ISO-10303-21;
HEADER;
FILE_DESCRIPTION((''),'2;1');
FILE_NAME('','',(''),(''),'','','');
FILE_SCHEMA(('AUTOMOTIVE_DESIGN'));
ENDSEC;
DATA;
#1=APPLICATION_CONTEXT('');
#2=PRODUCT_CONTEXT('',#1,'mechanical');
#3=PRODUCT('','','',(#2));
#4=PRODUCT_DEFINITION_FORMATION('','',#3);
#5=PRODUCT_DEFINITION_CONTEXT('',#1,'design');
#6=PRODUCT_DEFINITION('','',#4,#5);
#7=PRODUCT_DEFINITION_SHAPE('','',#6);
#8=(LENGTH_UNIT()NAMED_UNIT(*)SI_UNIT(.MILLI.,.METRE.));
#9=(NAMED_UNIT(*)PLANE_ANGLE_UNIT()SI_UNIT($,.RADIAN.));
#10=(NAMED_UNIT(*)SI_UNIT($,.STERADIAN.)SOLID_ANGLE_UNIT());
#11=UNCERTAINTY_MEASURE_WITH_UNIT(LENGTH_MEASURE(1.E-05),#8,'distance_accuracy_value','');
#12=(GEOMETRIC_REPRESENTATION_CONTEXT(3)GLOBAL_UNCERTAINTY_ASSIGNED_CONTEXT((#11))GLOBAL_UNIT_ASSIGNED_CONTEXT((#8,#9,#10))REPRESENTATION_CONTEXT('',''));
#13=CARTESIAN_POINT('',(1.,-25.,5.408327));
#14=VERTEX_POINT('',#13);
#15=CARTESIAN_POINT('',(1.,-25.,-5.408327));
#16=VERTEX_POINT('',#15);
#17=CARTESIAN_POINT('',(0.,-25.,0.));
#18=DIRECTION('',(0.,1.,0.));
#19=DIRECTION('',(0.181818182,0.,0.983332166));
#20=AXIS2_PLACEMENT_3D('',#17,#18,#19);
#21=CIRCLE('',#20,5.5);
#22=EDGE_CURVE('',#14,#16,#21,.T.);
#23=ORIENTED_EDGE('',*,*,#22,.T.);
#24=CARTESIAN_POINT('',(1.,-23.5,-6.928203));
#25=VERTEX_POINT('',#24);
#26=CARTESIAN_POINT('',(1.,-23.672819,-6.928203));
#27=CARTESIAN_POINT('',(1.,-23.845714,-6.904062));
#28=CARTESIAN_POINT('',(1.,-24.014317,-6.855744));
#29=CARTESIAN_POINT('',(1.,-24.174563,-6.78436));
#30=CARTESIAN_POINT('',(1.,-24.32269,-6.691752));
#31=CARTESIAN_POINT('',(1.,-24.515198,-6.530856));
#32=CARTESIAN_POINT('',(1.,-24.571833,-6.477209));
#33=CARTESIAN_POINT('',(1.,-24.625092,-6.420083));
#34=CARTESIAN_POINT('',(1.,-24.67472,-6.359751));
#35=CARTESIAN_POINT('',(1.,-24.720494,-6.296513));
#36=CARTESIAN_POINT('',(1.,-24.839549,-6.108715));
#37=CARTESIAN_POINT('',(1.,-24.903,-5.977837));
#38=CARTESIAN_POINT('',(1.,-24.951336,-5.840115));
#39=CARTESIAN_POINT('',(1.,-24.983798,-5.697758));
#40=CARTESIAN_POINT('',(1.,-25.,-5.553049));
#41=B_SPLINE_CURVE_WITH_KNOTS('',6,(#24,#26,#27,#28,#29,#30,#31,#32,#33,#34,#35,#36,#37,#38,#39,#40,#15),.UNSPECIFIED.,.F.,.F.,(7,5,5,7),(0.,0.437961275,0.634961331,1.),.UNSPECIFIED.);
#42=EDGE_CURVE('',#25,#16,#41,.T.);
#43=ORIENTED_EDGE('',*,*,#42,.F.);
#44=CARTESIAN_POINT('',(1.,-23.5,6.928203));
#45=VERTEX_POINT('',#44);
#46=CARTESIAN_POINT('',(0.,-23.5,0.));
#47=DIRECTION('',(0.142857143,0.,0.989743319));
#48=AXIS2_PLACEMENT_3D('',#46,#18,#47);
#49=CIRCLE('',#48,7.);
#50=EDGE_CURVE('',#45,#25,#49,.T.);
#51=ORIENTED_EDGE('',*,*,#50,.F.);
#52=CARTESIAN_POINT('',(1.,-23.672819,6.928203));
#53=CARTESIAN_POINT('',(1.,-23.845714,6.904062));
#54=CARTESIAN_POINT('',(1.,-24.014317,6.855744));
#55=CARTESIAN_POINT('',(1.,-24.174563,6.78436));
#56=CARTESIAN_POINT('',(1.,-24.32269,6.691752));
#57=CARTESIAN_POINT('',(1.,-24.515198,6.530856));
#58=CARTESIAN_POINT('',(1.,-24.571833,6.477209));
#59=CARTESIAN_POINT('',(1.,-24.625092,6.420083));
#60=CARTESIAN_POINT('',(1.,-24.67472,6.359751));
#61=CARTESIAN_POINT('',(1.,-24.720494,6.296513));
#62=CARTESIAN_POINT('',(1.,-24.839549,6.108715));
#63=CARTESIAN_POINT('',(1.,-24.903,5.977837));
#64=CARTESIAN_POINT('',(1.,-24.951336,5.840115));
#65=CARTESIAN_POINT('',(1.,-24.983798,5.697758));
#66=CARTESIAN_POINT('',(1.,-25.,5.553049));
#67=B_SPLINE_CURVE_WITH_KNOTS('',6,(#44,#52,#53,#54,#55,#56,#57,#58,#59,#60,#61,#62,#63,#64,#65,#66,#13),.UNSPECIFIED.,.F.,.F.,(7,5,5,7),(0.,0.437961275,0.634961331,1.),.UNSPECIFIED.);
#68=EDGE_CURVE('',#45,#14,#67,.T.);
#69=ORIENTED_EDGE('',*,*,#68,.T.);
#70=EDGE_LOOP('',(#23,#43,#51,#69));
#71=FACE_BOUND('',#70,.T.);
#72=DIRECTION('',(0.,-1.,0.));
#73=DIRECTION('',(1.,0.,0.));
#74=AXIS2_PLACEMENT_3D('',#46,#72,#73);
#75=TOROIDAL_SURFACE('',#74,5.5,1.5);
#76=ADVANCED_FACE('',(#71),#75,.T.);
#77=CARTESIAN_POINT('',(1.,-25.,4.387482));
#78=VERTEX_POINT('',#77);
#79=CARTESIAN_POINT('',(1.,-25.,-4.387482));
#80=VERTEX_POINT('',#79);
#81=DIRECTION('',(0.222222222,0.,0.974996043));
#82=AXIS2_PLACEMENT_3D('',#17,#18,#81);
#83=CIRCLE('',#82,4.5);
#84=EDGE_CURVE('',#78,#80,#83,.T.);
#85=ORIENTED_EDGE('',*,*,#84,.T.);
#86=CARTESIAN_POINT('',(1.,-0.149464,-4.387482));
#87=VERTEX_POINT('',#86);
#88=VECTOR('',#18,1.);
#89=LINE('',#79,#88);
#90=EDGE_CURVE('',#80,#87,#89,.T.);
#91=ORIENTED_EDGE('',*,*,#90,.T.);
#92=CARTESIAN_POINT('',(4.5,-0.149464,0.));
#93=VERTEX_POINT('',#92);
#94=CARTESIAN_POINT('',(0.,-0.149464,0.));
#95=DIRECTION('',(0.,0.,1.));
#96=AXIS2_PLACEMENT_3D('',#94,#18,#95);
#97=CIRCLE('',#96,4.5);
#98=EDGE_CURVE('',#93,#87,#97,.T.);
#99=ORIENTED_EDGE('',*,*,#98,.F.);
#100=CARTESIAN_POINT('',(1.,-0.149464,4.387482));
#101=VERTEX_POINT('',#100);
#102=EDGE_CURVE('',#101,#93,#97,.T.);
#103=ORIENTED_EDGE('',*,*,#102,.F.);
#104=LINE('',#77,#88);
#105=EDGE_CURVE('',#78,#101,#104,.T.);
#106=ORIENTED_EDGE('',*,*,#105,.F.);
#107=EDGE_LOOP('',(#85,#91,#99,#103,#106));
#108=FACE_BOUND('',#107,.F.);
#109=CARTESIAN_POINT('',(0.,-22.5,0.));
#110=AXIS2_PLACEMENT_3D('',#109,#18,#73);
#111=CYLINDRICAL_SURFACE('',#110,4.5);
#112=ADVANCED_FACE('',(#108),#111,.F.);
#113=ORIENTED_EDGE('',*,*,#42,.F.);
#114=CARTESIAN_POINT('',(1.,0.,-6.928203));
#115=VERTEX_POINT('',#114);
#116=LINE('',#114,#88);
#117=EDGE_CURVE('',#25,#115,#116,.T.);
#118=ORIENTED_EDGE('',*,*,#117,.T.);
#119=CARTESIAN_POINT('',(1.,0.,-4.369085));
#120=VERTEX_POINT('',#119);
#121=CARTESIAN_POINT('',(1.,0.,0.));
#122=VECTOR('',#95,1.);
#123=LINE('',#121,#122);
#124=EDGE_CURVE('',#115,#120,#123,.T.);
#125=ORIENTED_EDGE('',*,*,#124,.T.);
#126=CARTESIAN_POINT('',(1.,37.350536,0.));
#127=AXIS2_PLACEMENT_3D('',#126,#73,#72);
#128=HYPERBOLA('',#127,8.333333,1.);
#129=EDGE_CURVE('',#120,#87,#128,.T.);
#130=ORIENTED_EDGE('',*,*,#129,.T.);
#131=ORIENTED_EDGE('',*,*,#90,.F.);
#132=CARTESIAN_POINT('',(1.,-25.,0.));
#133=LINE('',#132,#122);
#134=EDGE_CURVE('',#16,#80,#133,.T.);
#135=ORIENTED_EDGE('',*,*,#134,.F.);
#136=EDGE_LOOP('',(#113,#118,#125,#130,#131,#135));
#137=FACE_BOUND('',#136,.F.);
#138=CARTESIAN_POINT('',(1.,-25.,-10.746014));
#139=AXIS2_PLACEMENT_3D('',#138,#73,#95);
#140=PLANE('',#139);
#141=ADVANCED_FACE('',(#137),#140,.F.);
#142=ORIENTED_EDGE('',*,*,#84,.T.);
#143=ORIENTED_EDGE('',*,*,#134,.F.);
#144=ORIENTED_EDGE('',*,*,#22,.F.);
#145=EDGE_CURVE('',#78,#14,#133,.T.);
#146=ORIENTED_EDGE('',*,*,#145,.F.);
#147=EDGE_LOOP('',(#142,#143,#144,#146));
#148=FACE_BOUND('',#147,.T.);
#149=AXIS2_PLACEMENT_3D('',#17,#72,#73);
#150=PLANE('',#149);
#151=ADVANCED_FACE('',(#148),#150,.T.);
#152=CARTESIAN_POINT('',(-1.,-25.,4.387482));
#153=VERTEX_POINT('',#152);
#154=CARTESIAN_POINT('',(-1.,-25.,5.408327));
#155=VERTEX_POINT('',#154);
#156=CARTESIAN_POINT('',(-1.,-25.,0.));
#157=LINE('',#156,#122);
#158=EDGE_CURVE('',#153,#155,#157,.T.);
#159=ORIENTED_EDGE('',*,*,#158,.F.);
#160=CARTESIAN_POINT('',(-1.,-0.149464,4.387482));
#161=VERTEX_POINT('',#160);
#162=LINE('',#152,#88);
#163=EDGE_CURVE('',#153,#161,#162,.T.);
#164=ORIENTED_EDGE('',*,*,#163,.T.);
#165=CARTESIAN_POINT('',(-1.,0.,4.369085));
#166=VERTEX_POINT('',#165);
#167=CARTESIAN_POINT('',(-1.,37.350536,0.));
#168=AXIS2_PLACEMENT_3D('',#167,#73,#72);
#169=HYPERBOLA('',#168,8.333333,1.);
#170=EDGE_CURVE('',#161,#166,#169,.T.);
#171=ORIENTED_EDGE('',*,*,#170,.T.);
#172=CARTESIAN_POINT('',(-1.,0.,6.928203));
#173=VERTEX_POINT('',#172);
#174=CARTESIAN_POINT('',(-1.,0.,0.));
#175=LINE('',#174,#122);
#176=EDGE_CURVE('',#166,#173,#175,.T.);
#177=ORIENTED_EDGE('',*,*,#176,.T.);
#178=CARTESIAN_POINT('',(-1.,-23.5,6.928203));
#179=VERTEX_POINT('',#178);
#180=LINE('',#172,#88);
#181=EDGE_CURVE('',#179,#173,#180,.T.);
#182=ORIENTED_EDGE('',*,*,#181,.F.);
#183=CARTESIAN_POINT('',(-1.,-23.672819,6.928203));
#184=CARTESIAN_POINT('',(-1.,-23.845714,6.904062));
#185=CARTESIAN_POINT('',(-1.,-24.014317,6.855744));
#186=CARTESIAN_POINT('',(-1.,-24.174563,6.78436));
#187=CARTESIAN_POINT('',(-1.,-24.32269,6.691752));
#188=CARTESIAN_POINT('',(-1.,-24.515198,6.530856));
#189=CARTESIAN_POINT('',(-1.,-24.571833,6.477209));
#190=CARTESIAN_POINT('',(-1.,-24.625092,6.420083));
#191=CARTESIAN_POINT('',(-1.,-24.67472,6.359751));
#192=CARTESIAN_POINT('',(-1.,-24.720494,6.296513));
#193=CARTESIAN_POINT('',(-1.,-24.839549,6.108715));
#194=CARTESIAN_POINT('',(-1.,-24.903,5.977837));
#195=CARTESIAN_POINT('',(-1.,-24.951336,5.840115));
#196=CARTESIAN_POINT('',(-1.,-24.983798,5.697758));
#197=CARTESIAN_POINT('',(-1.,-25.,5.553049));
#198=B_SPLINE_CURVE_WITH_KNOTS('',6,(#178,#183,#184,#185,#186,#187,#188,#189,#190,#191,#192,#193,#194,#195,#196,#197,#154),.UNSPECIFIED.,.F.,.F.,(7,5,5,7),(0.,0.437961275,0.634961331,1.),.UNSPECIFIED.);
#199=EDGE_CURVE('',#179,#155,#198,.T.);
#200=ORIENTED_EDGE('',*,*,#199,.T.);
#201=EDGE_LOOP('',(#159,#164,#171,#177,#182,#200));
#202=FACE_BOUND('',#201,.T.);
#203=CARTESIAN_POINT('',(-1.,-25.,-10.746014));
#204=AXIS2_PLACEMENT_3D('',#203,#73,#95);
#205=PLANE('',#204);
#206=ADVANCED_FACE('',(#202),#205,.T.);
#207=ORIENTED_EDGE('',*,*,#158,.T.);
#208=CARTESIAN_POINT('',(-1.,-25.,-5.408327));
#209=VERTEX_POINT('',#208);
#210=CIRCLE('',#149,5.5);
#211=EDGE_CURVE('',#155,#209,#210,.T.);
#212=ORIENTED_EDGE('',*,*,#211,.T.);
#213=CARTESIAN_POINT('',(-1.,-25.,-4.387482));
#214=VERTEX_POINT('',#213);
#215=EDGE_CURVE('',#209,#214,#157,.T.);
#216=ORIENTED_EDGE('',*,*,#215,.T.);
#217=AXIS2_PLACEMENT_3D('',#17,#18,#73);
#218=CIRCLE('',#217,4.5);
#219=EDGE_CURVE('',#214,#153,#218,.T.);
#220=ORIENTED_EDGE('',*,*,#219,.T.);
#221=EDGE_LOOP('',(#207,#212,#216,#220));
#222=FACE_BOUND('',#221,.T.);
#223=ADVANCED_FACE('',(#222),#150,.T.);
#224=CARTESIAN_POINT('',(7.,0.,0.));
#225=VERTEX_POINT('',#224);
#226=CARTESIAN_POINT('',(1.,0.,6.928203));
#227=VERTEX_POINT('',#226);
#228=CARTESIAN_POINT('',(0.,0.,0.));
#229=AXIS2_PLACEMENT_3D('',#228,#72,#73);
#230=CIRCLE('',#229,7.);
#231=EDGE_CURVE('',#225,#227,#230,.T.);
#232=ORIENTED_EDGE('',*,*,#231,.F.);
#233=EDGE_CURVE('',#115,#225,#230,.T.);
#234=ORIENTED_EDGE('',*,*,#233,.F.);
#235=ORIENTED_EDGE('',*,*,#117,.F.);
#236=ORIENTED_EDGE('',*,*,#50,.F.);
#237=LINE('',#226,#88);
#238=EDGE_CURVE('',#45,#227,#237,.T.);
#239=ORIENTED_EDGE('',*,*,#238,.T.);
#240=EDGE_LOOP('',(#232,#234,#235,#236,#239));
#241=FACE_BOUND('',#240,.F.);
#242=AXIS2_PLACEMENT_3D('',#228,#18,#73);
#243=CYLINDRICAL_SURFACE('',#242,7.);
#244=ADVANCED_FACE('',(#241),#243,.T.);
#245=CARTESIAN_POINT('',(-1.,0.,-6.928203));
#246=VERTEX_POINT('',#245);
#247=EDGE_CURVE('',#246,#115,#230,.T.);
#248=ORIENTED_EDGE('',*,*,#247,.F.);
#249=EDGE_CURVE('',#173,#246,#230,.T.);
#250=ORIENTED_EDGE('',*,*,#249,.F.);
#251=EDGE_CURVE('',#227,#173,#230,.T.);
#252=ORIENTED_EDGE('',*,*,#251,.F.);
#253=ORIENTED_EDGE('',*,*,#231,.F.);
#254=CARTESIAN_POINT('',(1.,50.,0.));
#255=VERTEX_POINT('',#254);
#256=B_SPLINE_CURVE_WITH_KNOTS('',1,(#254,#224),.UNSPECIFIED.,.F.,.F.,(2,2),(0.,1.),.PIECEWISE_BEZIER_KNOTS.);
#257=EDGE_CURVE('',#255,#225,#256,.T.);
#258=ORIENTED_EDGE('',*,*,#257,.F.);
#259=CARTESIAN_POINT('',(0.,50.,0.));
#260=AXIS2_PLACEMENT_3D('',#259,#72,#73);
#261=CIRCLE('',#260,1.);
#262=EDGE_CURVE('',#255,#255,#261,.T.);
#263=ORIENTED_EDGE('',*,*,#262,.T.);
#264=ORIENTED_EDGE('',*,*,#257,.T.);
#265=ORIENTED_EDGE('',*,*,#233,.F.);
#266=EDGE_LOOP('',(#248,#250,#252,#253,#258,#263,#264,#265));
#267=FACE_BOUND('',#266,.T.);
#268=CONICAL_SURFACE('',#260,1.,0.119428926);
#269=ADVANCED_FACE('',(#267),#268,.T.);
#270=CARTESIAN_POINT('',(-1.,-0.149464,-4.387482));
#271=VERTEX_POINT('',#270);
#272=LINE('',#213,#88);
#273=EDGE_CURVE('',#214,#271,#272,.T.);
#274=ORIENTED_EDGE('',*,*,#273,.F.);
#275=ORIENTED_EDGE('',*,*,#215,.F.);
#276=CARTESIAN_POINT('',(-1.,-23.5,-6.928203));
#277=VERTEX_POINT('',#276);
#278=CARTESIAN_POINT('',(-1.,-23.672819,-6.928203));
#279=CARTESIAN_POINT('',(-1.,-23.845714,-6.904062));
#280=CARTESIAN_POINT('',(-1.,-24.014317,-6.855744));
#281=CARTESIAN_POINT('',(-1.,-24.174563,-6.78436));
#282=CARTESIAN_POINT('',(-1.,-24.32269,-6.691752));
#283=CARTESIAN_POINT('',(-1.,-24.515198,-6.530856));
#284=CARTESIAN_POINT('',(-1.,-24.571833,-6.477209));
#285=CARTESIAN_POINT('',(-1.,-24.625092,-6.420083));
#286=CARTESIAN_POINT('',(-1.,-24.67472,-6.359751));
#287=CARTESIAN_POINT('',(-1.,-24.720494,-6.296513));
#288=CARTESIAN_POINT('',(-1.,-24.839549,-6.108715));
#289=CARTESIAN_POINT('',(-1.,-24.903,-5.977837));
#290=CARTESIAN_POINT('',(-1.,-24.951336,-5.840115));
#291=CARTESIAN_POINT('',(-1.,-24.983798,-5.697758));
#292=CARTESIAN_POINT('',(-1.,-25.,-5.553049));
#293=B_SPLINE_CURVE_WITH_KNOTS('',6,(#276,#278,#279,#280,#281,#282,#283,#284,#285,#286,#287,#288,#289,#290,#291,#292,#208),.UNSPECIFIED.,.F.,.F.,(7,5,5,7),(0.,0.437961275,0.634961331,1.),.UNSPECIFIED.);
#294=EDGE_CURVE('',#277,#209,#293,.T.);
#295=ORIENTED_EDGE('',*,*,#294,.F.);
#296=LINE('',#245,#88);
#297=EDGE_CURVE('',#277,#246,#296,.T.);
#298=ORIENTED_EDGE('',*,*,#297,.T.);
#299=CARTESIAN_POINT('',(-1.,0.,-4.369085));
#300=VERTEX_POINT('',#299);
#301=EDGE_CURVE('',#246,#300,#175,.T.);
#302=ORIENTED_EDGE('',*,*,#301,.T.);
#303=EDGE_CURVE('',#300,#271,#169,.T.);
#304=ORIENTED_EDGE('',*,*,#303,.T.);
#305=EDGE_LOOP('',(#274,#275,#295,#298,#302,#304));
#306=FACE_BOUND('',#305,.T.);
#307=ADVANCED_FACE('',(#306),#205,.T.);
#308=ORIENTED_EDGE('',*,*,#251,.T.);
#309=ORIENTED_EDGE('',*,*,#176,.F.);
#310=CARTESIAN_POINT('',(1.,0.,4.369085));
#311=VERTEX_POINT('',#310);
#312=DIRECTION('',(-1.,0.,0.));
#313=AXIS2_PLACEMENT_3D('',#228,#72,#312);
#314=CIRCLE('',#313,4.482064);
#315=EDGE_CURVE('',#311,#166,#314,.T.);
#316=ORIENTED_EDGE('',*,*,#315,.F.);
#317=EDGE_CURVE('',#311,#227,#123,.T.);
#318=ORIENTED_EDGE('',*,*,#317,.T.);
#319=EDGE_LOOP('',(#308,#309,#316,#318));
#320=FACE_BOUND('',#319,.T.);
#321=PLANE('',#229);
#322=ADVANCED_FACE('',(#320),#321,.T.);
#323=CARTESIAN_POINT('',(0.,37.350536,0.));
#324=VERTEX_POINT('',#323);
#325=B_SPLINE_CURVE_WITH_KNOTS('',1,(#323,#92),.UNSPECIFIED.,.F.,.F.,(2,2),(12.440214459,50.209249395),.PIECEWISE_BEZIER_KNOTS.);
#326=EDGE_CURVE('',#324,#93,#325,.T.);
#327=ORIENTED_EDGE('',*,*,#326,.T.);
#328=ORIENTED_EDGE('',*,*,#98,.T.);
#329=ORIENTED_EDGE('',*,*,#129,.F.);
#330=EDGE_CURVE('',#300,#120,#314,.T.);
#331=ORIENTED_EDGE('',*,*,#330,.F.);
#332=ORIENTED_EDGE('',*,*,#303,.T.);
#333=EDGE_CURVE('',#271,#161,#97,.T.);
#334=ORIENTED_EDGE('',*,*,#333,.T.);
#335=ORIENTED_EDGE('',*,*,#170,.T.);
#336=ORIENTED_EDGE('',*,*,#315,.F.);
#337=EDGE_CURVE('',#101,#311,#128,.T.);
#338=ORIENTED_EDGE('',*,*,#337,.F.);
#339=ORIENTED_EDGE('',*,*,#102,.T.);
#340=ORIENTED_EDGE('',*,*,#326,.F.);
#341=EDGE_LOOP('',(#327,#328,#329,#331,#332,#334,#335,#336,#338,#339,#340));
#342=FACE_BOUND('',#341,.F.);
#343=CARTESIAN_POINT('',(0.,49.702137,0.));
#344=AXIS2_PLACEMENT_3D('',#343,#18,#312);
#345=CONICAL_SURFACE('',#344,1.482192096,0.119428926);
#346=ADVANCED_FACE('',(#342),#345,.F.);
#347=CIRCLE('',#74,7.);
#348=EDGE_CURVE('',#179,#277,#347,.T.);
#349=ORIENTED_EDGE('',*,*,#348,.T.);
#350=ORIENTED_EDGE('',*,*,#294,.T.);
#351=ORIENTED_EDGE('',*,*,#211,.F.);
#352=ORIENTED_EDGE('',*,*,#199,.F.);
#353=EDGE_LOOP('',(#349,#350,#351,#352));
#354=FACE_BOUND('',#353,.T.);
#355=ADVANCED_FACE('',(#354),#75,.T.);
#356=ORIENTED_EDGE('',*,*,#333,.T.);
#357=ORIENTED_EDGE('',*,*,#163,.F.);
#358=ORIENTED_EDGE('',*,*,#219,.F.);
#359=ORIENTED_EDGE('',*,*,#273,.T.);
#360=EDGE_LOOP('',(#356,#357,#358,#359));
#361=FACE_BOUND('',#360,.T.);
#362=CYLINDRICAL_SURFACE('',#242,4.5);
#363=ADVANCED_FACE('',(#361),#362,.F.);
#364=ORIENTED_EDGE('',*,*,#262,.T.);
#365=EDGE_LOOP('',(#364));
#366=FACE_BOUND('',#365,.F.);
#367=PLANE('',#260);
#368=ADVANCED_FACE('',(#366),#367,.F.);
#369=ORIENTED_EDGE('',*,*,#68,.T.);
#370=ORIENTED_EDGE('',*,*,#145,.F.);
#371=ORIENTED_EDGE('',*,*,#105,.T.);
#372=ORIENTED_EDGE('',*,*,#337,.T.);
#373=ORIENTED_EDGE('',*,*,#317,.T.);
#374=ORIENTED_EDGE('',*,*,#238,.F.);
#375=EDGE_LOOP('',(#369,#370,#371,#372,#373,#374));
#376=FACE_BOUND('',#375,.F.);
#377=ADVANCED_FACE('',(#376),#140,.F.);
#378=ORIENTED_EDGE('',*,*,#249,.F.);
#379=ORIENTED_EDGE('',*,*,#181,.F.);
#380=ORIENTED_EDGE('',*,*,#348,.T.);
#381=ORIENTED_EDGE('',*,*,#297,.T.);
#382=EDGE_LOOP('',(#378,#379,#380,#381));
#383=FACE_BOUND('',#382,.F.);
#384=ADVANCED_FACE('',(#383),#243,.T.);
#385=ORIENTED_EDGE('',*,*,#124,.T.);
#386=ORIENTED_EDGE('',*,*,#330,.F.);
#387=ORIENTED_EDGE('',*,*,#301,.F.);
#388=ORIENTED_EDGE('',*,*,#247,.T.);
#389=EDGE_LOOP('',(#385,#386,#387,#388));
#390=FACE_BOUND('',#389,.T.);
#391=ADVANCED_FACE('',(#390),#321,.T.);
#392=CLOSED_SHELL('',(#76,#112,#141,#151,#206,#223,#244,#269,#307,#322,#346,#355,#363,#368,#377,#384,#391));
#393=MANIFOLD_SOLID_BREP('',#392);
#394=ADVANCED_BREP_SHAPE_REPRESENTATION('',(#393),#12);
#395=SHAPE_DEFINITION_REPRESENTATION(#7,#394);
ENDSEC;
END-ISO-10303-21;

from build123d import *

# Parameters (mm, degrees)
F0_R      = 7
F1_DEPTH  = 25
F3_R      = 1
F1_FACE_R = 7
F5_T      = -2.5
F6_R      = 1.5
F8_W      = 2
F8_H      = 21.4920276658
F9_DEPTH  = 25


# Not quite as in the source:
# - a shell that OpenCascade refuses in one call is made with other operations: the cavity is built on its own and cut out
# - a feature names something its author has since deleted; it is built from what else it names


with BuildPart() as f1:
    # F0 (on Front) → F1 (new body)
    with BuildSketch(Plane.XZ):
        Circle(F0_R)
    extrude(amount=F1_DEPTH)

    # F3 (on offset) → F4 section 0
    with BuildSketch(Plane.XZ.offset(-50)):
        Circle(F3_R)
    # F1_face (on face) → F4 section 1
    with BuildSketch(Plane(origin=(0, 0, 0), x_dir=(1, 0, 0), z_dir=(0, 1, 0))):
        Circle(F1_FACE_R)
    loft()

    # F5: a shell. OpenCascade refuses it in one call, so the cavity is built on its own and cut out:
    # the body offset inwards by the wall thickness, plus a prism from it out through each open face.
    f5_core = offset(f1.part, amount=F5_T, mode=Mode.PRIVATE)
    f5_exits = [f5_core.faces().sort_by_distance(p)[0] for p in [
        (0, -22.5, 0),
    ]]
    add(f5_core, mode=Mode.SUBTRACT)
    extrude(f5_exits, amount=-F5_T, mode=Mode.SUBTRACT)

    # F6
    f6_edges = [f1.edges().sort_by_distance(p)[0] for p in [
        (-7, -25, 0),
    ]]
    fillet(f6_edges, radius=F6_R)

    # F8 (on offset) → F9 (cut)
    with BuildSketch(Plane.XZ.offset(25)):
        Rectangle(F8_W, F8_H)
    extrude(amount=-F9_DEPTH, mode=Mode.SUBTRACT)


solid = f1.part
